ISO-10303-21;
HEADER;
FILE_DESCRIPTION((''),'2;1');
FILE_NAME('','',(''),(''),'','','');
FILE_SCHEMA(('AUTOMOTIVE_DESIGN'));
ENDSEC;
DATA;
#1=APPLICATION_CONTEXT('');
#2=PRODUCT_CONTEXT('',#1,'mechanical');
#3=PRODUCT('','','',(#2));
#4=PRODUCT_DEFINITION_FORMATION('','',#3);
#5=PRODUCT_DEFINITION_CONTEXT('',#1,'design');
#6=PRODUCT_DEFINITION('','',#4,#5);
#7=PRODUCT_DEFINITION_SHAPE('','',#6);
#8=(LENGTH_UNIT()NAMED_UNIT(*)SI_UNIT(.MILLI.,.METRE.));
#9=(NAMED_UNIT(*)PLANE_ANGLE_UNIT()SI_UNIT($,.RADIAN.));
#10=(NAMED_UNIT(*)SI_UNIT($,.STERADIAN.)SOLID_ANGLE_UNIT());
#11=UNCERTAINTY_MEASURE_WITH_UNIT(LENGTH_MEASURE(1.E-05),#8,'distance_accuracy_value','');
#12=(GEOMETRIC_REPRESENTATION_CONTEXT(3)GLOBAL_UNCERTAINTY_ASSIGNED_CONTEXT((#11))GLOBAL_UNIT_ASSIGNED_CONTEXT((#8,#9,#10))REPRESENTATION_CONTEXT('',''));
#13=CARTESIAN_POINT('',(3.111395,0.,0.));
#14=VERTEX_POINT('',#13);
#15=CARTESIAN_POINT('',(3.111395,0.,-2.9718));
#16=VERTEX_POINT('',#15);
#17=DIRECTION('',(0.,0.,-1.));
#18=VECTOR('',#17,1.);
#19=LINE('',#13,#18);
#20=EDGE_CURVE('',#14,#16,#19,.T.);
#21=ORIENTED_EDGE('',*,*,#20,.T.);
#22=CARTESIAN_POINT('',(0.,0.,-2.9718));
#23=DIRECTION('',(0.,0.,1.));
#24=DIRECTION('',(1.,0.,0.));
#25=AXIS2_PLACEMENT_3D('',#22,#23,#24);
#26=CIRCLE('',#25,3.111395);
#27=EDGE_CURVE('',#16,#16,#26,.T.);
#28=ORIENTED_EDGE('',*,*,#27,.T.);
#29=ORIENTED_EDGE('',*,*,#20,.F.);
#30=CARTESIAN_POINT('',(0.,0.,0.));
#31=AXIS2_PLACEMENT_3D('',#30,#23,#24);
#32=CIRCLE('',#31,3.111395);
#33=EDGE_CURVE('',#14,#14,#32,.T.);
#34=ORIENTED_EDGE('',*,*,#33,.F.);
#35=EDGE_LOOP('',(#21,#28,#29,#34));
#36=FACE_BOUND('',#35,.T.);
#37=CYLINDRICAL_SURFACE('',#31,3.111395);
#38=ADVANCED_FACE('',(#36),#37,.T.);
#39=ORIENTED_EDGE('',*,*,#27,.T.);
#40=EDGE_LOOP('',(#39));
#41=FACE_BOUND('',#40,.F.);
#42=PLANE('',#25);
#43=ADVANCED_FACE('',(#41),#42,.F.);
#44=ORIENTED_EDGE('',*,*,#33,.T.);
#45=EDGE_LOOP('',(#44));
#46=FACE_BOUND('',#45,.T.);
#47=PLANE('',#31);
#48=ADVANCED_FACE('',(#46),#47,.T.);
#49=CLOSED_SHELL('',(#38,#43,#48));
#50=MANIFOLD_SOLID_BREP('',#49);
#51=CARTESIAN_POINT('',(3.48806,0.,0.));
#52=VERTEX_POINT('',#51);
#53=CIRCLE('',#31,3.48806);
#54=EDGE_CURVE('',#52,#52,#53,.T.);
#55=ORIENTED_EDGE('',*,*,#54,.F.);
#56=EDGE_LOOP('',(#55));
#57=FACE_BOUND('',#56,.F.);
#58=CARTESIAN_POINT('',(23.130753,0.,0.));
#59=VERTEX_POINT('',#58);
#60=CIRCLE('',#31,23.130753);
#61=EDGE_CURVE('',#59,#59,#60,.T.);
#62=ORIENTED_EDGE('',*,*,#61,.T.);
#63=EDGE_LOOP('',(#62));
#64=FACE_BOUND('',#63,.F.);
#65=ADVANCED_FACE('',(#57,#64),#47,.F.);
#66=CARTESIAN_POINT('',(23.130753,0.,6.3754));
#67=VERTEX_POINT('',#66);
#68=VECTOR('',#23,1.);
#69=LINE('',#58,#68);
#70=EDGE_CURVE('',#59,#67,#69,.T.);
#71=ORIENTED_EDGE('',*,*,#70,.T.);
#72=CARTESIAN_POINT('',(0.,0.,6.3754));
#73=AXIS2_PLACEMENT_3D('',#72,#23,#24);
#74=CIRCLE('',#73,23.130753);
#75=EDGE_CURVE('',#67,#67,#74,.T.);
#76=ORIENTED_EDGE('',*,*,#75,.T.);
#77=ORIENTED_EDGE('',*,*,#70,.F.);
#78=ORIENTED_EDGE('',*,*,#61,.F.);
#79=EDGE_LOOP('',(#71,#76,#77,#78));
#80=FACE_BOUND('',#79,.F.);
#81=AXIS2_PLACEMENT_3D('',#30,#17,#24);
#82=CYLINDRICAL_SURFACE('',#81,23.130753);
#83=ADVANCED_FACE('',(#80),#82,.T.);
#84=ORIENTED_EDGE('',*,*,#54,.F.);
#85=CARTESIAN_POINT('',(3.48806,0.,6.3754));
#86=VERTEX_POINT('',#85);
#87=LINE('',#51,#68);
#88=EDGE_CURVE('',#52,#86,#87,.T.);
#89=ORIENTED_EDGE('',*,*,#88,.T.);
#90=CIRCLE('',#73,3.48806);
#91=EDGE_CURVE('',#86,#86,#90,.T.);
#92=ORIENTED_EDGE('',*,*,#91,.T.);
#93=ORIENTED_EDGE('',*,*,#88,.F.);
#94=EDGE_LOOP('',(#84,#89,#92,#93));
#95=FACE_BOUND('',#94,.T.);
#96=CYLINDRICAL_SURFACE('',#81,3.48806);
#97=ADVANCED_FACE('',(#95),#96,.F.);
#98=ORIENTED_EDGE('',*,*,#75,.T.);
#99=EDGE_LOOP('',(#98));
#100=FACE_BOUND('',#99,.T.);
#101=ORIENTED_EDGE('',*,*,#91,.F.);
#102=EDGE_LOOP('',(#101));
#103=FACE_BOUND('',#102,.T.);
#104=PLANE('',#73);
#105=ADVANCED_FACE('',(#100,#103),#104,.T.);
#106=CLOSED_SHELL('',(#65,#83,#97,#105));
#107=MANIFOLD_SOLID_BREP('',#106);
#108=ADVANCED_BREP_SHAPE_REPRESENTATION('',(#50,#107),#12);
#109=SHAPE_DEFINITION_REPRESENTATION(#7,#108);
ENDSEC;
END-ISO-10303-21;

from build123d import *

# Parameters (mm, degrees)
F0_R     = 23.1307530626
F0_R_2   = 3.4880603878
F1_DEPTH = 6.3754
F0_R_3   = 3.1113947691
F2_DEPTH = 2.9718


with BuildPart() as f1:
    # F0 (on Top) → F1 (new body)
    with BuildSketch(Plane.XY):
        Circle(F0_R)
        Circle(F0_R_2, mode=Mode.SUBTRACT)
    extrude(amount=F1_DEPTH)


with BuildPart() as f2:
    # F0 (on Top) → F2 (new body)
    with BuildSketch(Plane.XY):
        Circle(F0_R_3)
    extrude(amount=-F2_DEPTH)


solid = Compound([f1.part, f2.part])
